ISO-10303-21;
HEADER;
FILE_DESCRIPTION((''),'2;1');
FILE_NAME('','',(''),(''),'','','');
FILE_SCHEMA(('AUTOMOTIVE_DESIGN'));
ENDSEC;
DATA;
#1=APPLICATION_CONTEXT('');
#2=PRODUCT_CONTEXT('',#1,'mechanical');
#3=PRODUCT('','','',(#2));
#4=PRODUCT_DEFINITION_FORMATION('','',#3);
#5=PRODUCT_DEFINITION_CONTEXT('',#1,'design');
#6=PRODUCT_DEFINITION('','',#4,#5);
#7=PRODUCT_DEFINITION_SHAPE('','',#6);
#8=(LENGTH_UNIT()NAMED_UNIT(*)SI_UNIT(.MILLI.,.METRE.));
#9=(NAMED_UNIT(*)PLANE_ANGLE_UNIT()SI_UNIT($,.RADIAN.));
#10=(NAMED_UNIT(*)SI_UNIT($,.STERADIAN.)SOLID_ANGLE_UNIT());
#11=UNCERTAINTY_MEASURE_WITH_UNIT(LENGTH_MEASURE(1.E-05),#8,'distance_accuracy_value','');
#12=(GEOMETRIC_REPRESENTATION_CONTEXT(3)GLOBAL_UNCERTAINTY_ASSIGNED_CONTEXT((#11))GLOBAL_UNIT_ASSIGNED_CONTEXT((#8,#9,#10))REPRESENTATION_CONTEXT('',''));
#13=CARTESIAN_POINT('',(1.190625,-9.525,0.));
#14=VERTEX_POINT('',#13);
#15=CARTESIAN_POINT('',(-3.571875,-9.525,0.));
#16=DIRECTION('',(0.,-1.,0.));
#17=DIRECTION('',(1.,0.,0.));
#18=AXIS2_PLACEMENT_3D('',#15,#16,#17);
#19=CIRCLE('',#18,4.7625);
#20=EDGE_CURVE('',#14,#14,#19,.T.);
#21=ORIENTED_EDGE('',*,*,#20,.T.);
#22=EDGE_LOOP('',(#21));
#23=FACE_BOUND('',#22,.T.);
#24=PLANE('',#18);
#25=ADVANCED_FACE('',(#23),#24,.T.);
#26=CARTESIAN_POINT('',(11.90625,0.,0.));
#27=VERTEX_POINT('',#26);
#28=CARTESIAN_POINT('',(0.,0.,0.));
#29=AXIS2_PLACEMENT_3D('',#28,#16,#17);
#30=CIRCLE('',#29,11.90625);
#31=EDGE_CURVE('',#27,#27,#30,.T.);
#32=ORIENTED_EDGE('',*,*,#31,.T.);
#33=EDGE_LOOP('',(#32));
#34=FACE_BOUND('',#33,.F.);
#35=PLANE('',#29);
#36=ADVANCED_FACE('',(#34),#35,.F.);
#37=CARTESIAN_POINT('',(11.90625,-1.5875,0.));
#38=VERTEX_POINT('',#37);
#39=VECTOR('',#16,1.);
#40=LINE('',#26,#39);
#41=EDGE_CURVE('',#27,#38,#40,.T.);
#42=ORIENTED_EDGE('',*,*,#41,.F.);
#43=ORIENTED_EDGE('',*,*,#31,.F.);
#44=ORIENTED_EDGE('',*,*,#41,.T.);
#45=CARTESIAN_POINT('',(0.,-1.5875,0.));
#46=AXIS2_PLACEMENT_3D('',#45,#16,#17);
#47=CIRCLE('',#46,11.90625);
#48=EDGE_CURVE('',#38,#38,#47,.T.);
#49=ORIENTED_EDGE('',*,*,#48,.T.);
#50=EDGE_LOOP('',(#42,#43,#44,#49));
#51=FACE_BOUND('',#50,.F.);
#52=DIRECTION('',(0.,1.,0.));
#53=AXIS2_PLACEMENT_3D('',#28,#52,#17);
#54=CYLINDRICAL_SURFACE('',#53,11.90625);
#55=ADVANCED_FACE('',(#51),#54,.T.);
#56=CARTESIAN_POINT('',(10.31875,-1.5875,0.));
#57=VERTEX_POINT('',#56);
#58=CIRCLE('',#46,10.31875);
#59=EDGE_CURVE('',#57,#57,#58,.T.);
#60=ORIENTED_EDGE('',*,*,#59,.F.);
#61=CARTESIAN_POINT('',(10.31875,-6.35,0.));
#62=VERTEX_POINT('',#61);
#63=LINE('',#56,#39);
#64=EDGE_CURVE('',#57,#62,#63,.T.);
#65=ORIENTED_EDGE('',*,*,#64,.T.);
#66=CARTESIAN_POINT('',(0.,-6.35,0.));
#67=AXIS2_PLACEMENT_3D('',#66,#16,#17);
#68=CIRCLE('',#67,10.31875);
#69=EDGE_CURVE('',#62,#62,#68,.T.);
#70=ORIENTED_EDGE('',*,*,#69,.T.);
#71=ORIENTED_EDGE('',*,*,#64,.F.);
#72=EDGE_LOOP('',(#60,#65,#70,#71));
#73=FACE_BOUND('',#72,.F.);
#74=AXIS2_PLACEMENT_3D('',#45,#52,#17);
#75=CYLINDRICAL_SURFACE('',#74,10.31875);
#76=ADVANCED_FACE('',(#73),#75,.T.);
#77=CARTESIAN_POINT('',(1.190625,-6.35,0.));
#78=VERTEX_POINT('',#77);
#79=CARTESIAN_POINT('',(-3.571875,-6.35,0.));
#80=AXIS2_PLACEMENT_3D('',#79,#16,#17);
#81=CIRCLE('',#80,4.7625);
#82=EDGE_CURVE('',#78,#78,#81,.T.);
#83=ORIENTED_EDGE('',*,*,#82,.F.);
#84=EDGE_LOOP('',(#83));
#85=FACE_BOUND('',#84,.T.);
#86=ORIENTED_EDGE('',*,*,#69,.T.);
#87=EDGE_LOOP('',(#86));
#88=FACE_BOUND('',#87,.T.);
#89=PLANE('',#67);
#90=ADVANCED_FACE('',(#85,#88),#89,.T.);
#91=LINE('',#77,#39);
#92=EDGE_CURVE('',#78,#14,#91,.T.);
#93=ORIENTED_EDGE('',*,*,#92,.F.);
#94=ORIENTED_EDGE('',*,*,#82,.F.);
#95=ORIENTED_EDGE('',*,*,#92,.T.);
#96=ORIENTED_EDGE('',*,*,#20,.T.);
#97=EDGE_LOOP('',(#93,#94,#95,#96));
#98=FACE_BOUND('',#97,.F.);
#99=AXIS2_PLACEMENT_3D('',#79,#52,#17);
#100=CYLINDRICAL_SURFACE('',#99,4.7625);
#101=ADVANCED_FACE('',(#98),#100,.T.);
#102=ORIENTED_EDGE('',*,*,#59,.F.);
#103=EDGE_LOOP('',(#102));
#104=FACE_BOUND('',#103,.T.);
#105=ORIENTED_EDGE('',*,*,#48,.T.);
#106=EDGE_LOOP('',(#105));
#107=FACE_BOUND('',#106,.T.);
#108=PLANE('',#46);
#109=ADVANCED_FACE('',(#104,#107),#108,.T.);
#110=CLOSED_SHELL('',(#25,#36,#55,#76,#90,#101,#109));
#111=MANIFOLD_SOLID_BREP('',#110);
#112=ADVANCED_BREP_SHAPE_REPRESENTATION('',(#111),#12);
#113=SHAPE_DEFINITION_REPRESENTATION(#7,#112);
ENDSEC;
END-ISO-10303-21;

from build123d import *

# Parameters (mm, degrees)
F0_R     = 11.90625
F1_DEPTH = 1.5875
F2_R     = 10.31875
F3_DEPTH = 4.7625
F4_R     = 4.7625
F5_DEPTH = 3.175


# Not quite as in the source:
# - a length typed as a fraction of an inch, garbled in the dataset ("3 / 203.2 mm" for 3/8 in), is restored


with BuildPart() as f1:
    # F0 (on Front) → F1 (new body)
    with BuildSketch(Plane.XZ):
        Circle(F0_R)
    extrude(amount=F1_DEPTH)

    # F2 (on face) → F3 (join)
    with BuildSketch(Plane.XZ.offset(1.5875)):
        Circle(F2_R)
    extrude(amount=F3_DEPTH)

    # F4 (on face) → F5 (join)
    with BuildSketch(Plane.XZ.offset(6.35)):
        with Locations((-3.571875, 0)):
            Circle(F4_R)
    extrude(amount=F5_DEPTH)


solid = f1.part
